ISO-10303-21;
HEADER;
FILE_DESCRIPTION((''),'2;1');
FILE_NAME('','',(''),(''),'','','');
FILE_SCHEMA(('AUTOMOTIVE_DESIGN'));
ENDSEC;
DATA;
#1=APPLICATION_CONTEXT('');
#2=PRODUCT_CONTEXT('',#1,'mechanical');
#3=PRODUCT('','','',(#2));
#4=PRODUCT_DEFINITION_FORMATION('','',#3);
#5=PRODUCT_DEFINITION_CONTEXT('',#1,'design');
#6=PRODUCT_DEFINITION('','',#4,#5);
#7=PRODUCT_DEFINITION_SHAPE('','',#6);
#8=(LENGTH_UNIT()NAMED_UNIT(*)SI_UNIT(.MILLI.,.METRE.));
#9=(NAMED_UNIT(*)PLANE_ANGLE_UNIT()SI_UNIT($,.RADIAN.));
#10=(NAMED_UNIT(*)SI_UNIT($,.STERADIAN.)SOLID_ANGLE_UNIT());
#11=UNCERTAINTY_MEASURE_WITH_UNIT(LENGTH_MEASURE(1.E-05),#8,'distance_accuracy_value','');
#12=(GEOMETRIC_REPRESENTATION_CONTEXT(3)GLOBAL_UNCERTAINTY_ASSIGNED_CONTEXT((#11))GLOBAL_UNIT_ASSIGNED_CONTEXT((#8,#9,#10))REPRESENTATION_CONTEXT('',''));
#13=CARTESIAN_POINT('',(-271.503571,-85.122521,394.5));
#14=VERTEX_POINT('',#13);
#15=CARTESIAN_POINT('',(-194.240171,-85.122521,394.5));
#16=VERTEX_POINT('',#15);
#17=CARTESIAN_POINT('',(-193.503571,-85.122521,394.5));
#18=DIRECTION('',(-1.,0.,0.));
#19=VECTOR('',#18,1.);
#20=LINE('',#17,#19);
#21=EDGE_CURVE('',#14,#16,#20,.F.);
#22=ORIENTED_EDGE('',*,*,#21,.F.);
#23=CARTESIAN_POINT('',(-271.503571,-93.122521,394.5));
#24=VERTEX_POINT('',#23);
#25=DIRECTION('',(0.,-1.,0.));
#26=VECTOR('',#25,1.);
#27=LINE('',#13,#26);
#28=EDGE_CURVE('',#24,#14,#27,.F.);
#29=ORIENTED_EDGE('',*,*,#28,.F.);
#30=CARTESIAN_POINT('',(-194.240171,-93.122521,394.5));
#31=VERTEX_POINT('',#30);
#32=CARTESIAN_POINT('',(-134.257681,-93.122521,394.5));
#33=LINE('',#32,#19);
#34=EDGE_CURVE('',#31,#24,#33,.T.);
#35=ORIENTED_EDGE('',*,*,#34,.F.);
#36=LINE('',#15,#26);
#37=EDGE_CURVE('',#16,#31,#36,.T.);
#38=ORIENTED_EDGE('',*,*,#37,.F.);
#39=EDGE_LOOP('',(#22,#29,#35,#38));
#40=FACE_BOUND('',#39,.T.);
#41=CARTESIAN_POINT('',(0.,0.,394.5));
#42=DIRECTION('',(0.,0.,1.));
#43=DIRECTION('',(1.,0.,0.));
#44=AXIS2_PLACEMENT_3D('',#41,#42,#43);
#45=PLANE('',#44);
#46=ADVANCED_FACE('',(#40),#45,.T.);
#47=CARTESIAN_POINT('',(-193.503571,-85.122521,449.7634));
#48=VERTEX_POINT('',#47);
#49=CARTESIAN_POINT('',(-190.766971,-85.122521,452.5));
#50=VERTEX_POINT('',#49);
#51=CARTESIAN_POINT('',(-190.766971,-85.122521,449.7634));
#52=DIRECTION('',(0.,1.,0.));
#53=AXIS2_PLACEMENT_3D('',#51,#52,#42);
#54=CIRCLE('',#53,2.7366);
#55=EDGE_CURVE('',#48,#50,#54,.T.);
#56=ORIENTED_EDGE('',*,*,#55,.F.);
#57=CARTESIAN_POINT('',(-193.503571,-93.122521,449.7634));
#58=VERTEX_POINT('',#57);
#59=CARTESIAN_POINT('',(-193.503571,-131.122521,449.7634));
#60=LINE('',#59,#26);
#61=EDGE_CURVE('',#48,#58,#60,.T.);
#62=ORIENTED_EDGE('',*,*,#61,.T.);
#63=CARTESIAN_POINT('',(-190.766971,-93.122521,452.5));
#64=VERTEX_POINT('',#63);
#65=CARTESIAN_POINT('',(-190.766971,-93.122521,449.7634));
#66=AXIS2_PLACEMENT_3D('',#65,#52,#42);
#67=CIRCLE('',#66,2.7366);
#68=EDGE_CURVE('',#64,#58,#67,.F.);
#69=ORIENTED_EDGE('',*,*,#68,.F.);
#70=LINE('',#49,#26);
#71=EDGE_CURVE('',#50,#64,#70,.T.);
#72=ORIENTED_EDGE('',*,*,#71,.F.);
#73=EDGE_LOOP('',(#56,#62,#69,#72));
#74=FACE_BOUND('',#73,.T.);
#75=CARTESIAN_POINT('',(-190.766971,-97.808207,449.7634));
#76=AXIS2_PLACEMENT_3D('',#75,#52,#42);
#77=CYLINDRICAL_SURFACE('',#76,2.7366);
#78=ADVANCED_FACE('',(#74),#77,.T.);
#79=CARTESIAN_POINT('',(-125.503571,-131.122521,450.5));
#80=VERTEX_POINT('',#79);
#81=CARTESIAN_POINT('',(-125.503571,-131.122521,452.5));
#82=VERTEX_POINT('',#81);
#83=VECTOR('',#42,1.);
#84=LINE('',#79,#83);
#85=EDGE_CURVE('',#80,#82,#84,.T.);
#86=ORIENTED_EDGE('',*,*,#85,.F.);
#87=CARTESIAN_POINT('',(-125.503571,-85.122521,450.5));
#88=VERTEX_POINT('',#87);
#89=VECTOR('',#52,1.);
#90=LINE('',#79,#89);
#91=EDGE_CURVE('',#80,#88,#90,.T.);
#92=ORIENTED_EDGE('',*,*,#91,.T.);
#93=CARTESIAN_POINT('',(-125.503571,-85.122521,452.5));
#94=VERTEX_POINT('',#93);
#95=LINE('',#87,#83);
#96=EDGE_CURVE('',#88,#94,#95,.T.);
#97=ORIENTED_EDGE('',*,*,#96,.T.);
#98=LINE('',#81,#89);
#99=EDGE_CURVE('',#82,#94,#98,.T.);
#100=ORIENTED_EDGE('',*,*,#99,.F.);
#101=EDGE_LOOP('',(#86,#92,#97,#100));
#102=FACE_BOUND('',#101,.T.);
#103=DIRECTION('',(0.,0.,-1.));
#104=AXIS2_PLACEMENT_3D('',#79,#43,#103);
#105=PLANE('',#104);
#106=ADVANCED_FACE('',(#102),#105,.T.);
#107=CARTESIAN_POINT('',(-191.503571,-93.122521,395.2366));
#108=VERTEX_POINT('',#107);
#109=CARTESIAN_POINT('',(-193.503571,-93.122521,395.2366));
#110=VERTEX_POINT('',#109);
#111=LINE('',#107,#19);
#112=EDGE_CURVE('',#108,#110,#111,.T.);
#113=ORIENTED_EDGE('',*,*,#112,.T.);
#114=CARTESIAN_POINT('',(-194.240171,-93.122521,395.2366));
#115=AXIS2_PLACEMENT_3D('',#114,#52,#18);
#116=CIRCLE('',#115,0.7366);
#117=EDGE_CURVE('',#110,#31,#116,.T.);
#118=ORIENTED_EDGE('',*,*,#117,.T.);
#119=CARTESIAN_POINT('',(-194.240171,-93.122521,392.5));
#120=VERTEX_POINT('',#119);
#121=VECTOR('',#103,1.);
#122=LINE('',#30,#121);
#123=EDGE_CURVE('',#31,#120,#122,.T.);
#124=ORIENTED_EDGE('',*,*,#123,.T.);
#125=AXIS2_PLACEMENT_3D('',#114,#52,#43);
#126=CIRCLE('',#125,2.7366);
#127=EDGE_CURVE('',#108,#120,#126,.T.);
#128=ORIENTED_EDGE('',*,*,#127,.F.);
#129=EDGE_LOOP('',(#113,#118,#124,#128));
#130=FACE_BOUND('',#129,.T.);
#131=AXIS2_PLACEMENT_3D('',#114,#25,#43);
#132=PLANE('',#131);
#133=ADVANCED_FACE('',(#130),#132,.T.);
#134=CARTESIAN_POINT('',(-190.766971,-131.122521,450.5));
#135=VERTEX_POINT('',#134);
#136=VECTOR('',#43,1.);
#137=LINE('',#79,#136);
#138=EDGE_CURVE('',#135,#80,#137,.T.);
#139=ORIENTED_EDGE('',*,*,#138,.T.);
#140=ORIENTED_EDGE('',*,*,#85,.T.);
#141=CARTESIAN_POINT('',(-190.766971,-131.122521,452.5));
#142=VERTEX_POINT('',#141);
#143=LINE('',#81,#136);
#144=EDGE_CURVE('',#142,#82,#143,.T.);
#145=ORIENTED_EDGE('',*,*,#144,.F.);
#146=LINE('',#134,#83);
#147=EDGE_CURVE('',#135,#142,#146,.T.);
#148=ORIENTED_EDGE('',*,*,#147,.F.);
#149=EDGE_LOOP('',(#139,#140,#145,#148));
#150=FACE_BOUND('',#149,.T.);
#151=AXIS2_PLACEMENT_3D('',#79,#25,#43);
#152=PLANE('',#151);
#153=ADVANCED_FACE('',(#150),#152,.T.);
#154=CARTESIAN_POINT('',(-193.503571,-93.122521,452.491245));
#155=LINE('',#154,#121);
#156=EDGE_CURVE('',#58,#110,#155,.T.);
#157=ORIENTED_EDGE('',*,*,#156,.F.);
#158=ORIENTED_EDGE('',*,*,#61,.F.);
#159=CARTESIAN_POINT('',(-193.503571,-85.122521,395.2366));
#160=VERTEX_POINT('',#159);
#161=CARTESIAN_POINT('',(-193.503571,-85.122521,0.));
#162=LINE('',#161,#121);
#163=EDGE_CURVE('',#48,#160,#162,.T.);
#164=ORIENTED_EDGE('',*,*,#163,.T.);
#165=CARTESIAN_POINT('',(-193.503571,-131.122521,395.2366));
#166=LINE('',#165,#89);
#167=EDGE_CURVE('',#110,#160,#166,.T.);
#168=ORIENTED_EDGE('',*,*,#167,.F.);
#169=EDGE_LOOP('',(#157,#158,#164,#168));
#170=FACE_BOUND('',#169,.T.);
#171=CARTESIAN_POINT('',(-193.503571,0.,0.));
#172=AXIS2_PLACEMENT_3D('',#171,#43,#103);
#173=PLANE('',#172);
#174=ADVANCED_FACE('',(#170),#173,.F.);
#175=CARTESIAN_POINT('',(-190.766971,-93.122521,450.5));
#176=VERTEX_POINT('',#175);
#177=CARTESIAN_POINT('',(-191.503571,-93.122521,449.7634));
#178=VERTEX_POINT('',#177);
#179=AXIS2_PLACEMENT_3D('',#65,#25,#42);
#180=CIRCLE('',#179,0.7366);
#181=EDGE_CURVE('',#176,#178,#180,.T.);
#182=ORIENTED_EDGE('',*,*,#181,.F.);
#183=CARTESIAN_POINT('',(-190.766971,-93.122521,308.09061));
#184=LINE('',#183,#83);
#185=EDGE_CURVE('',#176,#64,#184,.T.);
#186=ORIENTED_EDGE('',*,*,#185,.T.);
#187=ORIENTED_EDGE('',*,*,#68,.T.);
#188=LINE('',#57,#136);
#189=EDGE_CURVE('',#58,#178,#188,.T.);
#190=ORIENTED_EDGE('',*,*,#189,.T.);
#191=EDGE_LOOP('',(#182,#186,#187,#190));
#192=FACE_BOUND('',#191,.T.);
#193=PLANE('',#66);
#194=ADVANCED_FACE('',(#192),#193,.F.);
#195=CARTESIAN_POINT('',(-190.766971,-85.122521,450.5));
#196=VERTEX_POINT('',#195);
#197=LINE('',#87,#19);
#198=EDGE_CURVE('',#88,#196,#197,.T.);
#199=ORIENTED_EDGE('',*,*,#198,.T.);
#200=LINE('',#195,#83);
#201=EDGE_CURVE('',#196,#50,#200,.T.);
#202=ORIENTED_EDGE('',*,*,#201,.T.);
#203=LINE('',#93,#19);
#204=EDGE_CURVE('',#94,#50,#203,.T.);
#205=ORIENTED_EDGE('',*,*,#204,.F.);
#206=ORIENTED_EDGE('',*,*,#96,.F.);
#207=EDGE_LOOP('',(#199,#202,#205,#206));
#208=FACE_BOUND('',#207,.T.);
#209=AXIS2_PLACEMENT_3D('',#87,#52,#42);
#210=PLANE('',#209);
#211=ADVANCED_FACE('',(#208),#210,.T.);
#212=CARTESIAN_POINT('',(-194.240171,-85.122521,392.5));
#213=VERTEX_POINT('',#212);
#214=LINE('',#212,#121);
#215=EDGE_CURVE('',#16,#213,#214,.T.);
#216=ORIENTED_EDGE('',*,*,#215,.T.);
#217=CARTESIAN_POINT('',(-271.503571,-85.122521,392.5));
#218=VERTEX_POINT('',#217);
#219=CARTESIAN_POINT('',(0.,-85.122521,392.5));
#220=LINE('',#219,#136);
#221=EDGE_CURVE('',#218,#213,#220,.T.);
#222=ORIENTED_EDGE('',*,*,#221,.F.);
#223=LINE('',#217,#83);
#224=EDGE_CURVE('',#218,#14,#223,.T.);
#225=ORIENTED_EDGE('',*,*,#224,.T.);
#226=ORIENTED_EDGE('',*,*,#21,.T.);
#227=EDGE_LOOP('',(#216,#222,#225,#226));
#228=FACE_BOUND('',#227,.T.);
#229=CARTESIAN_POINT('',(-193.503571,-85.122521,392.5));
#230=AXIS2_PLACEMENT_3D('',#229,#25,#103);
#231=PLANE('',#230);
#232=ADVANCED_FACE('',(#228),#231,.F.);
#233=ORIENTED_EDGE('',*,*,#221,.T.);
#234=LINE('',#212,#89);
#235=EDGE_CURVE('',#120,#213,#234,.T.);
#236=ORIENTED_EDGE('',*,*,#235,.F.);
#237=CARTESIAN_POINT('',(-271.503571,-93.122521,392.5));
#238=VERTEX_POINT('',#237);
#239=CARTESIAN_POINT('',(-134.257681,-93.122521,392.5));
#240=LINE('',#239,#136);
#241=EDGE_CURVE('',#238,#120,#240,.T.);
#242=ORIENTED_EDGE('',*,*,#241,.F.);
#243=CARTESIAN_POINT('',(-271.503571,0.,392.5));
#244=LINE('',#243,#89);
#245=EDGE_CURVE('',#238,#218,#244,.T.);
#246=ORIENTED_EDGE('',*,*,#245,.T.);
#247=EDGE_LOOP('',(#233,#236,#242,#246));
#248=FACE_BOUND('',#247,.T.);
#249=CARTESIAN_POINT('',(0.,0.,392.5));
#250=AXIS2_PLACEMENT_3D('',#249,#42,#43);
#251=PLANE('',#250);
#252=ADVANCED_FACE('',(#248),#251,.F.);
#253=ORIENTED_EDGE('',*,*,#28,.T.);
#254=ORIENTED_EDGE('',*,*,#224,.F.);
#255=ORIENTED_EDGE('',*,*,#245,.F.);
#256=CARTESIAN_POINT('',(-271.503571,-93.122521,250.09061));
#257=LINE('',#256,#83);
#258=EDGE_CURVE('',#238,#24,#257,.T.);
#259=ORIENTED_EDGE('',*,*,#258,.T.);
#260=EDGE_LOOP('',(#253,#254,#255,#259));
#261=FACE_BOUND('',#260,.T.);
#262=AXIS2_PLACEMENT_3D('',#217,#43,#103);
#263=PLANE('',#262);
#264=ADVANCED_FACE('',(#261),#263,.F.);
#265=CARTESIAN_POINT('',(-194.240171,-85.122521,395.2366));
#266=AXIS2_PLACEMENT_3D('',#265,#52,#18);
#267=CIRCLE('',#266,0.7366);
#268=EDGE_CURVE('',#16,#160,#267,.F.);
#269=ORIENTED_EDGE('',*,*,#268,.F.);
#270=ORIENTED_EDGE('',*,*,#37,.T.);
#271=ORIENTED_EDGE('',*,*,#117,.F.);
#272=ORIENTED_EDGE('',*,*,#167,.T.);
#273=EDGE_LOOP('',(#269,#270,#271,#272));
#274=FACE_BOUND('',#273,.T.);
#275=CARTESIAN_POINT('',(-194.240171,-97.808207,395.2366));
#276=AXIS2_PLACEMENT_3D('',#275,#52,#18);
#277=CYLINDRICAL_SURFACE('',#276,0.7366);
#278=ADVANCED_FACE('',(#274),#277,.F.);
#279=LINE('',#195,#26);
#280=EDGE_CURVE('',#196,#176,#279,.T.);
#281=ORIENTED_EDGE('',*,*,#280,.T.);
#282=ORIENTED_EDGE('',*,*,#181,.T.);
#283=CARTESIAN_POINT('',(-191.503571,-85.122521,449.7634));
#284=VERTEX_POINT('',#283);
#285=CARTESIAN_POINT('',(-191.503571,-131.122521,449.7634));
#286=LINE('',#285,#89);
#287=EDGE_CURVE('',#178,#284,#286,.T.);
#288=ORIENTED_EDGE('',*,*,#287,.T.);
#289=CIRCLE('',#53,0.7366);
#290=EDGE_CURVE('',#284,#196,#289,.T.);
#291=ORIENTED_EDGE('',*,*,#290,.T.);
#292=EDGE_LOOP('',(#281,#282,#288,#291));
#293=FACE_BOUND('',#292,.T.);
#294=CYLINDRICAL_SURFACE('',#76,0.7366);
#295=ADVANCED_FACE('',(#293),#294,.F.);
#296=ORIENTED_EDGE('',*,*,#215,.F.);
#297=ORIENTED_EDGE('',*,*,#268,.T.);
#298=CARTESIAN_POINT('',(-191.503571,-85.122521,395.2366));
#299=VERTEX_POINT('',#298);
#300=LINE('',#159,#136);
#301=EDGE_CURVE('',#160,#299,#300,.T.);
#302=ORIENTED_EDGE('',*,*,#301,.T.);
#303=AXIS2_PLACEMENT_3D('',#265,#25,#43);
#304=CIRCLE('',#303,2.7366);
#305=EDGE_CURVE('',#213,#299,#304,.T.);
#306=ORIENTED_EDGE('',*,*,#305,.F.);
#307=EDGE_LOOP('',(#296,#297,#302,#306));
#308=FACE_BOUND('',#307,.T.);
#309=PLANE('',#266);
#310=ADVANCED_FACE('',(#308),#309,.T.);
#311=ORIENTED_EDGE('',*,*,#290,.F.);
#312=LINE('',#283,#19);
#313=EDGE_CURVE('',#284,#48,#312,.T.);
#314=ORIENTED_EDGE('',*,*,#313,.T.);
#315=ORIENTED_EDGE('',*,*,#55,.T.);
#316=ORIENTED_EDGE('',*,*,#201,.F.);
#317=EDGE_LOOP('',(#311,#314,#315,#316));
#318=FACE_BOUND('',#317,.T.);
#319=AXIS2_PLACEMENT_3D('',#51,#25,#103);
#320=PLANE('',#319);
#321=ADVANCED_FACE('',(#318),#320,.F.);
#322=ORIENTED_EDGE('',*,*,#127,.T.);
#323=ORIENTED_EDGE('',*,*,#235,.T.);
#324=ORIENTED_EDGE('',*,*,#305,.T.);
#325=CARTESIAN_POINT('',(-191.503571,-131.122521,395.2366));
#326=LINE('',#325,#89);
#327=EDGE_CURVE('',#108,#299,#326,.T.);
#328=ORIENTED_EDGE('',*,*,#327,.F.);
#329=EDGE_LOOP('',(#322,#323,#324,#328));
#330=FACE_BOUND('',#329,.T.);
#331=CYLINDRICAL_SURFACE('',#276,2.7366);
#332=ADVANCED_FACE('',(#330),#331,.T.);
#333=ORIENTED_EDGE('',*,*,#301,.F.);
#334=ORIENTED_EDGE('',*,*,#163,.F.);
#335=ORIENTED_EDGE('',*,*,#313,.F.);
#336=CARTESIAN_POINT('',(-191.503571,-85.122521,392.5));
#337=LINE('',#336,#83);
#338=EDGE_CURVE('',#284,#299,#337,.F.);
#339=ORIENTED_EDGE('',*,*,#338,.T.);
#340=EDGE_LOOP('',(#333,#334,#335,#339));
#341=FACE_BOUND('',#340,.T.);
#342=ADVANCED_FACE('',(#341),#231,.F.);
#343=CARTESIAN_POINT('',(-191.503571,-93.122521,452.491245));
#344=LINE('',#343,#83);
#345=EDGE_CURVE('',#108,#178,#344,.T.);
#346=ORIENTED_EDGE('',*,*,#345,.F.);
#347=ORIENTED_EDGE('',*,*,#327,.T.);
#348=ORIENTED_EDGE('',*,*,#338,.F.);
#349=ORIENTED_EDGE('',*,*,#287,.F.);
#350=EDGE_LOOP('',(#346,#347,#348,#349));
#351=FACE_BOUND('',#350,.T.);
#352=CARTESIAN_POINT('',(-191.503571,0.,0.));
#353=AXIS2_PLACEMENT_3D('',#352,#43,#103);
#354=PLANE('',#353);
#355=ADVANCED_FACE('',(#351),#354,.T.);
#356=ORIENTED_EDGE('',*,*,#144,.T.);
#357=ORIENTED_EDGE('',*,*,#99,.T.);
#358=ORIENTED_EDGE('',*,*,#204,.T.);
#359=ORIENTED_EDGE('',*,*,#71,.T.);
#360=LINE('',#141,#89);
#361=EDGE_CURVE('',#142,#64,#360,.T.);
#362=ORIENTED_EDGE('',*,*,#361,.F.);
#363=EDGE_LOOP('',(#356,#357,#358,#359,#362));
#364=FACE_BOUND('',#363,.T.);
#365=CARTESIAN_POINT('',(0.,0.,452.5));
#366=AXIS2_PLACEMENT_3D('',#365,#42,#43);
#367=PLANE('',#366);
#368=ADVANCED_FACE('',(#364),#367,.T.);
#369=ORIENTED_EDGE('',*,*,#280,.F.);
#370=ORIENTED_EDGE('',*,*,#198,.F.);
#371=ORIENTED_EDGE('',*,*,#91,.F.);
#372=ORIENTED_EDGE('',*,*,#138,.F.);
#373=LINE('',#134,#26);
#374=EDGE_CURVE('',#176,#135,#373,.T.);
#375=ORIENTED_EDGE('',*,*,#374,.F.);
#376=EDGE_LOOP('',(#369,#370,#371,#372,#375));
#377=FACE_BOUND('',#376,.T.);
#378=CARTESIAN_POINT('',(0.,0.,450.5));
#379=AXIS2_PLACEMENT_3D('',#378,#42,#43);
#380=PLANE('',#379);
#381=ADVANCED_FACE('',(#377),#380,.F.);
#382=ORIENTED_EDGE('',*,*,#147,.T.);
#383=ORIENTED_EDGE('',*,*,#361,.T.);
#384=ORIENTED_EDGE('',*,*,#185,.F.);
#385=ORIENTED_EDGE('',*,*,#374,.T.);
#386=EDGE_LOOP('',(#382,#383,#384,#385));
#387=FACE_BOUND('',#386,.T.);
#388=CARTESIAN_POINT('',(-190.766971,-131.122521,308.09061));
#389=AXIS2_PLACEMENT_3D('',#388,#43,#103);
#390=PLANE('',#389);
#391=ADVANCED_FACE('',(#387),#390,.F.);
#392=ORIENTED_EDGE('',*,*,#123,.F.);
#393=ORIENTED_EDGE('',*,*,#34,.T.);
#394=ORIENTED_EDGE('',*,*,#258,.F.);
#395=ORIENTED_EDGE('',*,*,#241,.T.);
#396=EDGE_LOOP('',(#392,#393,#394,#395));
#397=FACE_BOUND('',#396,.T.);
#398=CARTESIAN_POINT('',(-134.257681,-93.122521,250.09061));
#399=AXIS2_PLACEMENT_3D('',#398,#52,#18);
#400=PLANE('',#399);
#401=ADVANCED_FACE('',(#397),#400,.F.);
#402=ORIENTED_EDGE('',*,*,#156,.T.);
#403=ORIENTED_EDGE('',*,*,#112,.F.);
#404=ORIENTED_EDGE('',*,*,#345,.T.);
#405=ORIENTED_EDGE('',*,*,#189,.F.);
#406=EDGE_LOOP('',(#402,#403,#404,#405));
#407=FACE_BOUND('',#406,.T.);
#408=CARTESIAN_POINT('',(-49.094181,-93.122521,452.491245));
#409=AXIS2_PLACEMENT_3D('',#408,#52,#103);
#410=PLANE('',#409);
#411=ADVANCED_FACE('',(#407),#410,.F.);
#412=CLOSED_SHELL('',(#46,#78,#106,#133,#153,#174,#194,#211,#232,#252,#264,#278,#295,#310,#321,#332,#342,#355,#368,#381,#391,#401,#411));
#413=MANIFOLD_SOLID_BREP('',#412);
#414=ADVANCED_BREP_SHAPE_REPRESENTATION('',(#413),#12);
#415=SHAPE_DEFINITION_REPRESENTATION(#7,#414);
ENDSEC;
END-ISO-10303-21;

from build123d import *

# Parameters (mm, degrees)
CROQUIS1_W                       = 68
CROQUIS1_H                       = 46
BRIDA_BASE1_DEPTH                = 2
BRIDA_DE_ARISTA1_STRIP_W         = 9.4732
BRIDA_DE_ARISTA1_STRIP_H         = 2
BRIDA_DE_ARISTA1_STRIP_CUT_DEPTH = 46
BRIDA_DE_ARISTA1_DEPTH           = 46
BRIDA_DE_ARISTA2_STRIP_W         = 9.4732
BRIDA_DE_ARISTA2_STRIP_H         = 2
BRIDA_DE_ARISTA2_STRIP_CUT_DEPTH = 46
BRIDA_DE_ARISTA2_DEPTH           = 46
DESDOBLAR1_START                 = -131.122521377
DESDOBLAR1_DEPTH                 = 46
DESDOBLAR1_2_DEPTH               = 46
CROQUIS12_W                      = 137.245889802
CROQUIS12_H                      = 38
CORTAR_EXTRUIR1_DEPTH            = 2
DOBLAR1_START                    = -93.122521377
DOBLAR1_DEPTH                    = 8
DOBLAR1_2_DEPTH                  = 8


# Read off the part's stored shape, not the designer's step: Desdoblar1, Doblar1
# Sheet-metal steps are written as plain solids
with BuildPart() as part:
    # Croquis1 → Brida base1 (new body)
    with BuildSketch(Plane.XY.offset(452.5)):
        with Locations((-159.50357094, -108.122521377)):
            Rectangle(CROQUIS1_W, CROQUIS1_H)
    extrude(amount=-BRIDA_BASE1_DEPTH)

    # Brida de arista1 strip (across the edge) → Brida de arista1 strip cut (cut)
    with BuildSketch(Plane(origin=(-193.50357094, -131.122521377, 450.5), x_dir=(1, 0, 0), z_dir=(0, 1, 0))):
        with Locations((-2, -1)):
            Rectangle(BRIDA_DE_ARISTA1_STRIP_W, BRIDA_DE_ARISTA1_STRIP_H)
    extrude(amount=BRIDA_DE_ARISTA1_STRIP_CUT_DEPTH, mode=Mode.SUBTRACT)

    # Brida de arista1 section (across the edge) → Brida de arista1 (add)
    with BuildSketch(Plane(origin=(-193.50357094, -131.122521377, 450.5), x_dir=(1, 0, 0), z_dir=(0, 1, 0))):
        with BuildLine():
            Line((0, 0.7366), (0, 58))
            Line((0, 58), (2, 58))
            Line((2, 58), (2, 0.7366))
            ThreePointArc((2, 0.7366), (2.215745145, 0.215745145), (2.7366, 0))
            Line((2.7366, 0), (2.7366, -2))
            ThreePointArc((2.7366, -2), (0.801531583, -1.198468417), (0, 0.7366))
        make_face()
    extrude(amount=BRIDA_DE_ARISTA1_DEPTH)

    # Brida de arista2 strip (across the edge) → Brida de arista2 strip cut (cut)
    with BuildSketch(Plane(origin=(-193.50357094, -85.122521377, 392.5), x_dir=(0, 0, 1), z_dir=(0, -1, 0))):
        with Locations((-2, -1)):
            Rectangle(BRIDA_DE_ARISTA2_STRIP_W, BRIDA_DE_ARISTA2_STRIP_H)
    extrude(amount=BRIDA_DE_ARISTA2_STRIP_CUT_DEPTH, mode=Mode.SUBTRACT)

    # Brida de arista2 section (across the edge) → Brida de arista2 (add)
    with BuildSketch(Plane(origin=(-193.50357094, -85.122521377, 392.5), x_dir=(0, 0, 1), z_dir=(0, -1, 0))):
        with BuildLine():
            Line((0, 0.7366), (0, 78))
            Line((0, 78), (2, 78))
            Line((2, 78), (2, 0.7366))
            ThreePointArc((2, 0.7366), (2.215745145, 0.215745145), (2.7366, 0))
            Line((2.7366, 0), (2.7366, -2))
            ThreePointArc((2.7366, -2), (0.801531583, -1.198468417), (0, 0.7366))
        make_face()
    extrude(amount=BRIDA_DE_ARISTA2_DEPTH)

    # Desdoblar1 outline → Desdoblar1 (cut)
    with BuildSketch(Plane(origin=(0, 0, 0), x_dir=(1, 0, 0), z_dir=(0, 1, 0)).offset(DESDOBLAR1_START)):
        with BuildLine():
            ThreePointArc((-193.50357094, -449.7634), (-193.478203969, -450.135145906), (-193.402573338, -450.5))
            Line((-193.402573338, -450.5), (-190.76697094, -450.5))
            ThreePointArc((-190.76697094, -450.5), (-191.287825795, -450.284254855), (-191.50357094, -449.7634))
            Line((-191.50357094, -449.7634), (-191.50357094, -395.2366))
            ThreePointArc((-191.50357094, -395.2366), (-192.305102522, -393.301531582), (-194.24017094, -392.5))
            Line((-194.24017094, -392.5), (-271.50357094, -392.5))
            Line((-271.50357094, -392.5), (-271.50357094, -394.5))
            Line((-271.50357094, -394.5), (-194.24017094, -394.5))
            ThreePointArc((-194.24017094, -394.5), (-193.719316085, -394.715745145), (-193.50357094, -395.2366))
            Line((-193.50357094, -395.2366), (-193.50357094, -449.7634))
        make_face()
    extrude(amount=DESDOBLAR1_DEPTH, mode=Mode.SUBTRACT)

    # Desdoblar1 2 outline → Desdoblar1 2 (add)
    with BuildSketch(Plane(origin=(0, 0, 0), x_dir=(1, 0, 0), z_dir=(0, 1, 0)).offset(DESDOBLAR1_START)):
        with BuildLine():
            Line((-328.012860742, -452.5), (-190.76697094, -452.5))
            ThreePointArc((-190.76697094, -452.5), (-192.421238149, -451.943395312), (-193.402573338, -450.5))
            Line((-193.402573338, -450.5), (-328.012860742, -450.5))
            Line((-328.012860742, -450.5), (-328.012860742, -452.5))
        make_face()
    extrude(amount=DESDOBLAR1_2_DEPTH)

    # Croquis12 → Cortar-Extruir1 (cut)
    with BuildSketch(Plane.XY.offset(452.5)):
        with Locations((-259.389915841, -112.122521377)):
            Rectangle(CROQUIS12_W, CROQUIS12_H)
    extrude(amount=-CORTAR_EXTRUIR1_DEPTH, mode=Mode.SUBTRACT)

    # Doblar1 outline → Doblar1 (cut)
    with BuildSketch(Plane(origin=(0, 0, 0), x_dir=(1, 0, 0), z_dir=(0, 1, 0)).offset(DOBLAR1_START)):
        with BuildLine():
            ThreePointArc((-190.76697094, -452.5), (-192.421238149, -451.943395312), (-193.402573338, -450.5))
            Line((-193.402573338, -450.5), (-328.012860742, -450.5))
            Line((-328.012860742, -450.5), (-328.012860742, -452.5))
            Line((-328.012860742, -452.5), (-190.76697094, -452.5))
        make_face()
    extrude(amount=DOBLAR1_DEPTH, mode=Mode.SUBTRACT)

    # Doblar1 2 outline → Doblar1 2 (add)
    with BuildSketch(Plane(origin=(0, 0, 0), x_dir=(1, 0, 0), z_dir=(0, 1, 0)).offset(DOBLAR1_START)):
        with BuildLine():
            Line((-193.50357094, -395.2366), (-193.50357094, -449.7634))
            ThreePointArc((-193.50357094, -449.7634), (-193.478203969, -450.135145906), (-193.402573338, -450.5))
            Line((-193.402573338, -450.5), (-190.76697094, -450.5))
            ThreePointArc((-190.76697094, -450.5), (-191.287825795, -450.284254855), (-191.50357094, -449.7634))
            Line((-191.50357094, -449.7634), (-191.50357094, -395.2366))
            ThreePointArc((-191.50357094, -395.2366), (-192.305102522, -393.301531582), (-194.24017094, -392.5))
            Line((-194.24017094, -392.5), (-271.50357094, -392.5))
            Line((-271.50357094, -392.5), (-271.50357094, -394.5))
            Line((-271.50357094, -394.5), (-194.24017094, -394.5))
            ThreePointArc((-194.24017094, -394.5), (-193.719316085, -394.715745145), (-193.50357094, -395.2366))
        make_face()
    extrude(amount=DOBLAR1_2_DEPTH)


solid = part.part
